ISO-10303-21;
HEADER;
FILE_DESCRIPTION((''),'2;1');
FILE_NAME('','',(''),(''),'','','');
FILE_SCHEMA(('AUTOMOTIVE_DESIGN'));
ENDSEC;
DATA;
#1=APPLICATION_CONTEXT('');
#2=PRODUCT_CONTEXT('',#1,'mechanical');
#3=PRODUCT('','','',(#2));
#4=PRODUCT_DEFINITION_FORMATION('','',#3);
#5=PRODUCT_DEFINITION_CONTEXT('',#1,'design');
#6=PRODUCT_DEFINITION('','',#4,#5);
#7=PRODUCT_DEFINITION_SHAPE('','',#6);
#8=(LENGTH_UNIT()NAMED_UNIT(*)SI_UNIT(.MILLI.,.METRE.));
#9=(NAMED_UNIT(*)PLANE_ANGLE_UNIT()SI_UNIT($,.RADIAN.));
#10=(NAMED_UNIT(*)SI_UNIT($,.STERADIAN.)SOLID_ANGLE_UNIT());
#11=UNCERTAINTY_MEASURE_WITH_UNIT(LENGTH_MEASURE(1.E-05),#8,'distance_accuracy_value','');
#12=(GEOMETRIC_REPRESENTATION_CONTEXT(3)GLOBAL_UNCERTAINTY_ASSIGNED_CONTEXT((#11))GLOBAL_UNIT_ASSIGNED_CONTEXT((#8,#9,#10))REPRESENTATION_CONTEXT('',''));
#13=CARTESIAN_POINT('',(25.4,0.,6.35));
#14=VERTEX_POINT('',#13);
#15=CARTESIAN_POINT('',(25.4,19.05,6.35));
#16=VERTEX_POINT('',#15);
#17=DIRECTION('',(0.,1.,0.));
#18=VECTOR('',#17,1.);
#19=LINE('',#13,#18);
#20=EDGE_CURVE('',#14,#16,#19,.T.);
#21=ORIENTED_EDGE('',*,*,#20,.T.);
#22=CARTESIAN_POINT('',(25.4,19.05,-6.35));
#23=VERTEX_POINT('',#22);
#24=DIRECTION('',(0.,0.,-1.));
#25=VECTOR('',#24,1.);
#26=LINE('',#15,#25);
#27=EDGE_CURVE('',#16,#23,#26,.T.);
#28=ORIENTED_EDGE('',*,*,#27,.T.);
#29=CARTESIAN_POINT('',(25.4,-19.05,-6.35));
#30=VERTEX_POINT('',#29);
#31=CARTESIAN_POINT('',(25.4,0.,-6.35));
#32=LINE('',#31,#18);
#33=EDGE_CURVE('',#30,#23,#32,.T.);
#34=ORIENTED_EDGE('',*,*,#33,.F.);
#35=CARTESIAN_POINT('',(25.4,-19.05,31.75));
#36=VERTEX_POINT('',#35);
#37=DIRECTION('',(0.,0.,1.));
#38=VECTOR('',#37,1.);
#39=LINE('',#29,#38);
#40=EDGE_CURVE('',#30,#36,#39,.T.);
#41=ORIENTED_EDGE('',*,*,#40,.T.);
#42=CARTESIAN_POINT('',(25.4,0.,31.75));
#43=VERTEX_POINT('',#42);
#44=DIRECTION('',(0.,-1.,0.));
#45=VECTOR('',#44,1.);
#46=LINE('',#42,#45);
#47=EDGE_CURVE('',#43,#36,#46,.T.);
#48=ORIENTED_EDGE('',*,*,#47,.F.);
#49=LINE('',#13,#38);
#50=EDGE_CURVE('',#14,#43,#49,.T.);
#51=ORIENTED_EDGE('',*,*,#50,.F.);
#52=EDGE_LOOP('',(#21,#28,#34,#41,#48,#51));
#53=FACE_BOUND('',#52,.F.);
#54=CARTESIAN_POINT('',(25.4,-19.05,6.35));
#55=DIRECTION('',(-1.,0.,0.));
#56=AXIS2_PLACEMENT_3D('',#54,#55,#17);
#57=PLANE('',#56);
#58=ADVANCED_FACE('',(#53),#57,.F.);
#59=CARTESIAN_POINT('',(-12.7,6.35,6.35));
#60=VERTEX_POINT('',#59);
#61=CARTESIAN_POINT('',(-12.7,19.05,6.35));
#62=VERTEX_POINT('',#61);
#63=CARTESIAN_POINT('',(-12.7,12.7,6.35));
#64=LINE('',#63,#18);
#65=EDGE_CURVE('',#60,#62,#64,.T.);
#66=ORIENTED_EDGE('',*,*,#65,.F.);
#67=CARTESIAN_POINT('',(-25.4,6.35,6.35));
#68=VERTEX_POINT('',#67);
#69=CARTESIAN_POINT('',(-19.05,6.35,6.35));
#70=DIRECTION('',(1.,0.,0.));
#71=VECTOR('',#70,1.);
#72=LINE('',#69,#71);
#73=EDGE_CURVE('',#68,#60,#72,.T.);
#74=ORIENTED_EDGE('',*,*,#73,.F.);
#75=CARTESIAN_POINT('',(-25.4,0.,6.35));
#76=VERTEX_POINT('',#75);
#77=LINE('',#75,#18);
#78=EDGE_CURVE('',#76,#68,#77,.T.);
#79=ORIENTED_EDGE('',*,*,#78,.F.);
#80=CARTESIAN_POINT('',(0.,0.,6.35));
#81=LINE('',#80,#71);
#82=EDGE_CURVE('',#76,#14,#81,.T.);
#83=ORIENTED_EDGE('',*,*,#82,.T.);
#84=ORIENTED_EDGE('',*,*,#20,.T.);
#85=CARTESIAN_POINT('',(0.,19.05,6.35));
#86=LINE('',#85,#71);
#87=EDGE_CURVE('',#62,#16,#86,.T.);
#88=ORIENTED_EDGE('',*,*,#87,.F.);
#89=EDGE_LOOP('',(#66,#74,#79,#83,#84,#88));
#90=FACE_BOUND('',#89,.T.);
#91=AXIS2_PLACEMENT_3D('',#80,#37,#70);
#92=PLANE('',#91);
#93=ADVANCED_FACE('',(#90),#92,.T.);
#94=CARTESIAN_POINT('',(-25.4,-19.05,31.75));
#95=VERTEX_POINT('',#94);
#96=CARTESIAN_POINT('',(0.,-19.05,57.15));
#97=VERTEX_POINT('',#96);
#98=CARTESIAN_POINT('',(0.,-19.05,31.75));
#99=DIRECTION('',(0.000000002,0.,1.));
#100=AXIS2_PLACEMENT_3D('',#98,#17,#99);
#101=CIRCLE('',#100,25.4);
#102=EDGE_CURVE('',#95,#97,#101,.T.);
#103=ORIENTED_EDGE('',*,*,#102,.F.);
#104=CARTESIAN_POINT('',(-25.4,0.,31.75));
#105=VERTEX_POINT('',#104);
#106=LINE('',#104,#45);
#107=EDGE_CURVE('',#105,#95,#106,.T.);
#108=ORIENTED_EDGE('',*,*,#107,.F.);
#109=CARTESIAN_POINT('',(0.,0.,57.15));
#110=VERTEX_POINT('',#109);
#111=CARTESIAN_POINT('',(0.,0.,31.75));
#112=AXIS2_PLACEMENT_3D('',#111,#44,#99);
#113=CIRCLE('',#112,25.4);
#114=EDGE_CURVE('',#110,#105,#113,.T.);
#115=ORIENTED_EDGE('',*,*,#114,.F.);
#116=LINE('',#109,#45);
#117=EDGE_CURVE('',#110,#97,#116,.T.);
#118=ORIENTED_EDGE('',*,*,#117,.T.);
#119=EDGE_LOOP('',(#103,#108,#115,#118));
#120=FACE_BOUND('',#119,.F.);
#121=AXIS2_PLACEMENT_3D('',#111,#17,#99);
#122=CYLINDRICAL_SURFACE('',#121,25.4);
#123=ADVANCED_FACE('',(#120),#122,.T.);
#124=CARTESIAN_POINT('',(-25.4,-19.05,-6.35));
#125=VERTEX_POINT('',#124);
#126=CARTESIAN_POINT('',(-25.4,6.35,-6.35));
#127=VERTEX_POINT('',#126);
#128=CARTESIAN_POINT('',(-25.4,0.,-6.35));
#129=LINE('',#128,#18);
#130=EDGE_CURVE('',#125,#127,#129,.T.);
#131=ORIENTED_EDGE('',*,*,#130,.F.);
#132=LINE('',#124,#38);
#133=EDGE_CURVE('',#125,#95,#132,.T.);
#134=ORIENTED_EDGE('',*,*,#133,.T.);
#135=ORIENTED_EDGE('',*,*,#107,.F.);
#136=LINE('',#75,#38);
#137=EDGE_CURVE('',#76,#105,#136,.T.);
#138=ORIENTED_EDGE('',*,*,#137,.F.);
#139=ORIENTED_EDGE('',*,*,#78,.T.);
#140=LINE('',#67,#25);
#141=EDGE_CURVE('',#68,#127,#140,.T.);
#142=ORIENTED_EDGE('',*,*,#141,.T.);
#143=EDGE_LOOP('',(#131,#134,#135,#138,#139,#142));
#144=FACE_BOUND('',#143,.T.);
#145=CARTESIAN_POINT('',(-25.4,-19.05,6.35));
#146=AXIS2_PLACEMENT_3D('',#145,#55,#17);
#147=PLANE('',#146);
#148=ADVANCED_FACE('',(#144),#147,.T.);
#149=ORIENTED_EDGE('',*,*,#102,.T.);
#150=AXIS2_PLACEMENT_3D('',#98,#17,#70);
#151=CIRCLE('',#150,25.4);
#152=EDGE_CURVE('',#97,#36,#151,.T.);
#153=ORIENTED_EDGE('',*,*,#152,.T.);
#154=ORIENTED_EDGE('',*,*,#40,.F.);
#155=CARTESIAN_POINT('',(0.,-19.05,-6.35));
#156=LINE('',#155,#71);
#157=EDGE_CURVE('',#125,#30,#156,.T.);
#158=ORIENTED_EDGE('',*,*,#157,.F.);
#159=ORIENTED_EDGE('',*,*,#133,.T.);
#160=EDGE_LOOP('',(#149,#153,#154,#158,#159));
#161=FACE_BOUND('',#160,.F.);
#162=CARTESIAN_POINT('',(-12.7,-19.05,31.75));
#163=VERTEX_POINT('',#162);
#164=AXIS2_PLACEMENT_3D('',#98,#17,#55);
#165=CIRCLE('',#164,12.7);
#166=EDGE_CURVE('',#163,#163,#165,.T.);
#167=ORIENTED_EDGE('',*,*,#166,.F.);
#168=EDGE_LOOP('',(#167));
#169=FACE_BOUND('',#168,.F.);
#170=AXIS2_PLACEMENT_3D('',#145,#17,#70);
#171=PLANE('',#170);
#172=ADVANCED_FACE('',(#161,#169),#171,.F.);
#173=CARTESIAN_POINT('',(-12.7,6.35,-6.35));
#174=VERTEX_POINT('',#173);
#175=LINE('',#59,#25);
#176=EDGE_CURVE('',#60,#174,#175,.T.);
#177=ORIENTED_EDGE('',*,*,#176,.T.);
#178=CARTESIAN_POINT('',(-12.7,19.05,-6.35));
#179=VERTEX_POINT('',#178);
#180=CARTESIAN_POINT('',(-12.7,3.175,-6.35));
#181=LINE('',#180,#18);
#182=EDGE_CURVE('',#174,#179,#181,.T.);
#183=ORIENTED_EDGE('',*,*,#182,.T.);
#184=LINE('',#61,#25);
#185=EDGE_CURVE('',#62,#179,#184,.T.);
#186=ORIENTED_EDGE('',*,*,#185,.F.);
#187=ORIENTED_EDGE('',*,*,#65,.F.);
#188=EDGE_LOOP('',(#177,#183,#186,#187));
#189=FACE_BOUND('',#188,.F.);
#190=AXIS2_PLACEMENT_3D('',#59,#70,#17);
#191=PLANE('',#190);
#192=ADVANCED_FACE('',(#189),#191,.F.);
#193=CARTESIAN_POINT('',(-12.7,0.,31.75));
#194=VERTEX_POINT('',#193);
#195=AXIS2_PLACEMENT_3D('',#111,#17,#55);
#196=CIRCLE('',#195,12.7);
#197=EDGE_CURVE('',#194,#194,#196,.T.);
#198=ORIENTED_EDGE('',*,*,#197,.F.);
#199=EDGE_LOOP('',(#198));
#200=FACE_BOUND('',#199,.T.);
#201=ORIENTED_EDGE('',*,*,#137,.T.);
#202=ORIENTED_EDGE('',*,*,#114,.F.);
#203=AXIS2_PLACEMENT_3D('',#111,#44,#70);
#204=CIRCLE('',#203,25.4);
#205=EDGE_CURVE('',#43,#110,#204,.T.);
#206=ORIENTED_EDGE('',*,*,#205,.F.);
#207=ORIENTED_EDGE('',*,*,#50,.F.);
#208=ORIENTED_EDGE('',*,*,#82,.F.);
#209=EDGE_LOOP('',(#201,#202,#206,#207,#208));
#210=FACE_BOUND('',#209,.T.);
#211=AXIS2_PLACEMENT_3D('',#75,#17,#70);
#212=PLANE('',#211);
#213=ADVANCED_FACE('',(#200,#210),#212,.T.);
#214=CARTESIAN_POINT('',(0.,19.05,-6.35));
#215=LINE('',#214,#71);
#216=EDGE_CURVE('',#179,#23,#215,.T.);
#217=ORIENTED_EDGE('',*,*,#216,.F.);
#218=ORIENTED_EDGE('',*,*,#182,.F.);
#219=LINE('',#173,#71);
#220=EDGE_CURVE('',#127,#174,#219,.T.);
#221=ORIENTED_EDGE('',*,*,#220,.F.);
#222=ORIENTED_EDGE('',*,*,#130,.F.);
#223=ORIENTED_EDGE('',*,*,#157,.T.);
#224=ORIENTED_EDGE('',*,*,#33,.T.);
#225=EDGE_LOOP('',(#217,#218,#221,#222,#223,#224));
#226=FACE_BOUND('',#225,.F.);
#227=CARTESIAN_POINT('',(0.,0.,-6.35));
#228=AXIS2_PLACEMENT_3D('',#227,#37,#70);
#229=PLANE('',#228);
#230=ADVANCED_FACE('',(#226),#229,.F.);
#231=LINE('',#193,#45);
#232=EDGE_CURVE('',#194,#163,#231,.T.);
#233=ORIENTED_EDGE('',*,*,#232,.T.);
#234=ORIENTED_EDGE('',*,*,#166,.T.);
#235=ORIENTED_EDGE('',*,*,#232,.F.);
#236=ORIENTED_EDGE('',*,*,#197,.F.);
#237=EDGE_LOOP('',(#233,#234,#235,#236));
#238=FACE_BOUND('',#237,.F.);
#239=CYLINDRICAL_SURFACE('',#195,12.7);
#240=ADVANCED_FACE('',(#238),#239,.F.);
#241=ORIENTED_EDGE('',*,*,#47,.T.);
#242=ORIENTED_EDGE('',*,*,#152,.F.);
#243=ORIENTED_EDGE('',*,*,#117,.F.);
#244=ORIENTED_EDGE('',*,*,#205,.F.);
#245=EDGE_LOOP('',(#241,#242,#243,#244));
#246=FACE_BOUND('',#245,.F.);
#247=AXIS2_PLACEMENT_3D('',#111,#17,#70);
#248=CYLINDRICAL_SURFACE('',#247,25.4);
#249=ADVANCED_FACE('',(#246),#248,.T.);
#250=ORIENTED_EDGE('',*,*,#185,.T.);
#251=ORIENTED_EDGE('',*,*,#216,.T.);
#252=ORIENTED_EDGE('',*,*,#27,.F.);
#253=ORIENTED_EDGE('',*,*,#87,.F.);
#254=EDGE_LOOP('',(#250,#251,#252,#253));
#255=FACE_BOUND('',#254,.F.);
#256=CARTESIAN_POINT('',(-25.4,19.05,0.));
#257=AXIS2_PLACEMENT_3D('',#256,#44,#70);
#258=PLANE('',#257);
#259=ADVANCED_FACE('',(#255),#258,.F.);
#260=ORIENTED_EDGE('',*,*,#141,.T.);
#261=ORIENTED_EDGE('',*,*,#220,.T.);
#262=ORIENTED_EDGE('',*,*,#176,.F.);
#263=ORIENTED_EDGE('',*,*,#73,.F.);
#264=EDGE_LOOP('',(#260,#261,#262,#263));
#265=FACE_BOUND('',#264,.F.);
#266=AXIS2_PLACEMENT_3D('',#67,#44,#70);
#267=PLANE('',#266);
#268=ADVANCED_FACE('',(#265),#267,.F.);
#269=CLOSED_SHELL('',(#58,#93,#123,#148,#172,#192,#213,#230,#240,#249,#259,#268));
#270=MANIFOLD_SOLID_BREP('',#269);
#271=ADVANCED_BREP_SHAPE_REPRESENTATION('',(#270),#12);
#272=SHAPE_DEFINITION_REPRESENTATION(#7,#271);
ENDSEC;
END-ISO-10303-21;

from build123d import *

# Parameters (mm, degrees)
F0_W     = 50.8
F0_H     = 38.1
F1_DEPTH = 6.35
F2_W     = 12.7
F2_H     = 12.7
F3_DEPTH = 12.701
F4_W     = 50.8
F4_H     = 19.05
F5_DEPTH = 50.8
F7_DEPTH = 19.051
F6_R     = 12.7
F8_DEPTH = 19.051


# Not quite as in the source:
# - a feature names something its author has since deleted; it is built from what else it names


with BuildPart() as f1:
    # F0 (on Top) → F1 (new body, symmetric)
    with BuildSketch(Plane.XY):
        Rectangle(F0_W, F0_H)
    extrude(amount=F1_DEPTH, both=True)

    # F2 (on face) → F3 (cut, through all)
    with BuildSketch(Plane.XY.offset(6.35)):
        with Locations((-19.05, 12.7)):
            Rectangle(F2_W, F2_H)
    extrude(amount=-F3_DEPTH, mode=Mode.SUBTRACT)

    # F4 (on face) → F5 (join)
    with BuildSketch(Plane.XY.offset(6.35)):
        with Locations((0, -9.525)):
            Rectangle(F4_W, F4_H)
    extrude(amount=F5_DEPTH)

    # F6 (on face) → F7 (cut, through all)
    with BuildSketch(Plane(origin=(0, 0, 0), x_dir=(-1, 0, 0), z_dir=(0, 1, 0))):
        with BuildLine():
            ThreePointArc((-25.4, 31.75), (-17.9605122618, 49.7105122225), (-5.57e-08, 57.15))
            Line((-5.57e-08, 57.15), (-25.4, 57.15))
            Line((-25.4, 57.15), (-25.4, 31.75))
        make_face()
        with BuildLine():
            ThreePointArc((-5.57e-08, 57.15), (17.9605122225, 49.7105122618), (25.4, 31.75))
            Line((25.4, 31.75), (25.4, 57.15))
            Line((25.4, 57.15), (-5.57e-08, 57.15))
        make_face()
    extrude(amount=-F7_DEPTH, mode=Mode.SUBTRACT)

    # F6 (on face) → F8 (cut, through all)
    with BuildSketch(Plane(origin=(0, 0, 0), x_dir=(-1, 0, 0), z_dir=(0, 1, 0))):
        with Locations((0, 31.75)):
            Circle(F6_R)
    extrude(amount=-F8_DEPTH, mode=Mode.SUBTRACT)


solid = f1.part
